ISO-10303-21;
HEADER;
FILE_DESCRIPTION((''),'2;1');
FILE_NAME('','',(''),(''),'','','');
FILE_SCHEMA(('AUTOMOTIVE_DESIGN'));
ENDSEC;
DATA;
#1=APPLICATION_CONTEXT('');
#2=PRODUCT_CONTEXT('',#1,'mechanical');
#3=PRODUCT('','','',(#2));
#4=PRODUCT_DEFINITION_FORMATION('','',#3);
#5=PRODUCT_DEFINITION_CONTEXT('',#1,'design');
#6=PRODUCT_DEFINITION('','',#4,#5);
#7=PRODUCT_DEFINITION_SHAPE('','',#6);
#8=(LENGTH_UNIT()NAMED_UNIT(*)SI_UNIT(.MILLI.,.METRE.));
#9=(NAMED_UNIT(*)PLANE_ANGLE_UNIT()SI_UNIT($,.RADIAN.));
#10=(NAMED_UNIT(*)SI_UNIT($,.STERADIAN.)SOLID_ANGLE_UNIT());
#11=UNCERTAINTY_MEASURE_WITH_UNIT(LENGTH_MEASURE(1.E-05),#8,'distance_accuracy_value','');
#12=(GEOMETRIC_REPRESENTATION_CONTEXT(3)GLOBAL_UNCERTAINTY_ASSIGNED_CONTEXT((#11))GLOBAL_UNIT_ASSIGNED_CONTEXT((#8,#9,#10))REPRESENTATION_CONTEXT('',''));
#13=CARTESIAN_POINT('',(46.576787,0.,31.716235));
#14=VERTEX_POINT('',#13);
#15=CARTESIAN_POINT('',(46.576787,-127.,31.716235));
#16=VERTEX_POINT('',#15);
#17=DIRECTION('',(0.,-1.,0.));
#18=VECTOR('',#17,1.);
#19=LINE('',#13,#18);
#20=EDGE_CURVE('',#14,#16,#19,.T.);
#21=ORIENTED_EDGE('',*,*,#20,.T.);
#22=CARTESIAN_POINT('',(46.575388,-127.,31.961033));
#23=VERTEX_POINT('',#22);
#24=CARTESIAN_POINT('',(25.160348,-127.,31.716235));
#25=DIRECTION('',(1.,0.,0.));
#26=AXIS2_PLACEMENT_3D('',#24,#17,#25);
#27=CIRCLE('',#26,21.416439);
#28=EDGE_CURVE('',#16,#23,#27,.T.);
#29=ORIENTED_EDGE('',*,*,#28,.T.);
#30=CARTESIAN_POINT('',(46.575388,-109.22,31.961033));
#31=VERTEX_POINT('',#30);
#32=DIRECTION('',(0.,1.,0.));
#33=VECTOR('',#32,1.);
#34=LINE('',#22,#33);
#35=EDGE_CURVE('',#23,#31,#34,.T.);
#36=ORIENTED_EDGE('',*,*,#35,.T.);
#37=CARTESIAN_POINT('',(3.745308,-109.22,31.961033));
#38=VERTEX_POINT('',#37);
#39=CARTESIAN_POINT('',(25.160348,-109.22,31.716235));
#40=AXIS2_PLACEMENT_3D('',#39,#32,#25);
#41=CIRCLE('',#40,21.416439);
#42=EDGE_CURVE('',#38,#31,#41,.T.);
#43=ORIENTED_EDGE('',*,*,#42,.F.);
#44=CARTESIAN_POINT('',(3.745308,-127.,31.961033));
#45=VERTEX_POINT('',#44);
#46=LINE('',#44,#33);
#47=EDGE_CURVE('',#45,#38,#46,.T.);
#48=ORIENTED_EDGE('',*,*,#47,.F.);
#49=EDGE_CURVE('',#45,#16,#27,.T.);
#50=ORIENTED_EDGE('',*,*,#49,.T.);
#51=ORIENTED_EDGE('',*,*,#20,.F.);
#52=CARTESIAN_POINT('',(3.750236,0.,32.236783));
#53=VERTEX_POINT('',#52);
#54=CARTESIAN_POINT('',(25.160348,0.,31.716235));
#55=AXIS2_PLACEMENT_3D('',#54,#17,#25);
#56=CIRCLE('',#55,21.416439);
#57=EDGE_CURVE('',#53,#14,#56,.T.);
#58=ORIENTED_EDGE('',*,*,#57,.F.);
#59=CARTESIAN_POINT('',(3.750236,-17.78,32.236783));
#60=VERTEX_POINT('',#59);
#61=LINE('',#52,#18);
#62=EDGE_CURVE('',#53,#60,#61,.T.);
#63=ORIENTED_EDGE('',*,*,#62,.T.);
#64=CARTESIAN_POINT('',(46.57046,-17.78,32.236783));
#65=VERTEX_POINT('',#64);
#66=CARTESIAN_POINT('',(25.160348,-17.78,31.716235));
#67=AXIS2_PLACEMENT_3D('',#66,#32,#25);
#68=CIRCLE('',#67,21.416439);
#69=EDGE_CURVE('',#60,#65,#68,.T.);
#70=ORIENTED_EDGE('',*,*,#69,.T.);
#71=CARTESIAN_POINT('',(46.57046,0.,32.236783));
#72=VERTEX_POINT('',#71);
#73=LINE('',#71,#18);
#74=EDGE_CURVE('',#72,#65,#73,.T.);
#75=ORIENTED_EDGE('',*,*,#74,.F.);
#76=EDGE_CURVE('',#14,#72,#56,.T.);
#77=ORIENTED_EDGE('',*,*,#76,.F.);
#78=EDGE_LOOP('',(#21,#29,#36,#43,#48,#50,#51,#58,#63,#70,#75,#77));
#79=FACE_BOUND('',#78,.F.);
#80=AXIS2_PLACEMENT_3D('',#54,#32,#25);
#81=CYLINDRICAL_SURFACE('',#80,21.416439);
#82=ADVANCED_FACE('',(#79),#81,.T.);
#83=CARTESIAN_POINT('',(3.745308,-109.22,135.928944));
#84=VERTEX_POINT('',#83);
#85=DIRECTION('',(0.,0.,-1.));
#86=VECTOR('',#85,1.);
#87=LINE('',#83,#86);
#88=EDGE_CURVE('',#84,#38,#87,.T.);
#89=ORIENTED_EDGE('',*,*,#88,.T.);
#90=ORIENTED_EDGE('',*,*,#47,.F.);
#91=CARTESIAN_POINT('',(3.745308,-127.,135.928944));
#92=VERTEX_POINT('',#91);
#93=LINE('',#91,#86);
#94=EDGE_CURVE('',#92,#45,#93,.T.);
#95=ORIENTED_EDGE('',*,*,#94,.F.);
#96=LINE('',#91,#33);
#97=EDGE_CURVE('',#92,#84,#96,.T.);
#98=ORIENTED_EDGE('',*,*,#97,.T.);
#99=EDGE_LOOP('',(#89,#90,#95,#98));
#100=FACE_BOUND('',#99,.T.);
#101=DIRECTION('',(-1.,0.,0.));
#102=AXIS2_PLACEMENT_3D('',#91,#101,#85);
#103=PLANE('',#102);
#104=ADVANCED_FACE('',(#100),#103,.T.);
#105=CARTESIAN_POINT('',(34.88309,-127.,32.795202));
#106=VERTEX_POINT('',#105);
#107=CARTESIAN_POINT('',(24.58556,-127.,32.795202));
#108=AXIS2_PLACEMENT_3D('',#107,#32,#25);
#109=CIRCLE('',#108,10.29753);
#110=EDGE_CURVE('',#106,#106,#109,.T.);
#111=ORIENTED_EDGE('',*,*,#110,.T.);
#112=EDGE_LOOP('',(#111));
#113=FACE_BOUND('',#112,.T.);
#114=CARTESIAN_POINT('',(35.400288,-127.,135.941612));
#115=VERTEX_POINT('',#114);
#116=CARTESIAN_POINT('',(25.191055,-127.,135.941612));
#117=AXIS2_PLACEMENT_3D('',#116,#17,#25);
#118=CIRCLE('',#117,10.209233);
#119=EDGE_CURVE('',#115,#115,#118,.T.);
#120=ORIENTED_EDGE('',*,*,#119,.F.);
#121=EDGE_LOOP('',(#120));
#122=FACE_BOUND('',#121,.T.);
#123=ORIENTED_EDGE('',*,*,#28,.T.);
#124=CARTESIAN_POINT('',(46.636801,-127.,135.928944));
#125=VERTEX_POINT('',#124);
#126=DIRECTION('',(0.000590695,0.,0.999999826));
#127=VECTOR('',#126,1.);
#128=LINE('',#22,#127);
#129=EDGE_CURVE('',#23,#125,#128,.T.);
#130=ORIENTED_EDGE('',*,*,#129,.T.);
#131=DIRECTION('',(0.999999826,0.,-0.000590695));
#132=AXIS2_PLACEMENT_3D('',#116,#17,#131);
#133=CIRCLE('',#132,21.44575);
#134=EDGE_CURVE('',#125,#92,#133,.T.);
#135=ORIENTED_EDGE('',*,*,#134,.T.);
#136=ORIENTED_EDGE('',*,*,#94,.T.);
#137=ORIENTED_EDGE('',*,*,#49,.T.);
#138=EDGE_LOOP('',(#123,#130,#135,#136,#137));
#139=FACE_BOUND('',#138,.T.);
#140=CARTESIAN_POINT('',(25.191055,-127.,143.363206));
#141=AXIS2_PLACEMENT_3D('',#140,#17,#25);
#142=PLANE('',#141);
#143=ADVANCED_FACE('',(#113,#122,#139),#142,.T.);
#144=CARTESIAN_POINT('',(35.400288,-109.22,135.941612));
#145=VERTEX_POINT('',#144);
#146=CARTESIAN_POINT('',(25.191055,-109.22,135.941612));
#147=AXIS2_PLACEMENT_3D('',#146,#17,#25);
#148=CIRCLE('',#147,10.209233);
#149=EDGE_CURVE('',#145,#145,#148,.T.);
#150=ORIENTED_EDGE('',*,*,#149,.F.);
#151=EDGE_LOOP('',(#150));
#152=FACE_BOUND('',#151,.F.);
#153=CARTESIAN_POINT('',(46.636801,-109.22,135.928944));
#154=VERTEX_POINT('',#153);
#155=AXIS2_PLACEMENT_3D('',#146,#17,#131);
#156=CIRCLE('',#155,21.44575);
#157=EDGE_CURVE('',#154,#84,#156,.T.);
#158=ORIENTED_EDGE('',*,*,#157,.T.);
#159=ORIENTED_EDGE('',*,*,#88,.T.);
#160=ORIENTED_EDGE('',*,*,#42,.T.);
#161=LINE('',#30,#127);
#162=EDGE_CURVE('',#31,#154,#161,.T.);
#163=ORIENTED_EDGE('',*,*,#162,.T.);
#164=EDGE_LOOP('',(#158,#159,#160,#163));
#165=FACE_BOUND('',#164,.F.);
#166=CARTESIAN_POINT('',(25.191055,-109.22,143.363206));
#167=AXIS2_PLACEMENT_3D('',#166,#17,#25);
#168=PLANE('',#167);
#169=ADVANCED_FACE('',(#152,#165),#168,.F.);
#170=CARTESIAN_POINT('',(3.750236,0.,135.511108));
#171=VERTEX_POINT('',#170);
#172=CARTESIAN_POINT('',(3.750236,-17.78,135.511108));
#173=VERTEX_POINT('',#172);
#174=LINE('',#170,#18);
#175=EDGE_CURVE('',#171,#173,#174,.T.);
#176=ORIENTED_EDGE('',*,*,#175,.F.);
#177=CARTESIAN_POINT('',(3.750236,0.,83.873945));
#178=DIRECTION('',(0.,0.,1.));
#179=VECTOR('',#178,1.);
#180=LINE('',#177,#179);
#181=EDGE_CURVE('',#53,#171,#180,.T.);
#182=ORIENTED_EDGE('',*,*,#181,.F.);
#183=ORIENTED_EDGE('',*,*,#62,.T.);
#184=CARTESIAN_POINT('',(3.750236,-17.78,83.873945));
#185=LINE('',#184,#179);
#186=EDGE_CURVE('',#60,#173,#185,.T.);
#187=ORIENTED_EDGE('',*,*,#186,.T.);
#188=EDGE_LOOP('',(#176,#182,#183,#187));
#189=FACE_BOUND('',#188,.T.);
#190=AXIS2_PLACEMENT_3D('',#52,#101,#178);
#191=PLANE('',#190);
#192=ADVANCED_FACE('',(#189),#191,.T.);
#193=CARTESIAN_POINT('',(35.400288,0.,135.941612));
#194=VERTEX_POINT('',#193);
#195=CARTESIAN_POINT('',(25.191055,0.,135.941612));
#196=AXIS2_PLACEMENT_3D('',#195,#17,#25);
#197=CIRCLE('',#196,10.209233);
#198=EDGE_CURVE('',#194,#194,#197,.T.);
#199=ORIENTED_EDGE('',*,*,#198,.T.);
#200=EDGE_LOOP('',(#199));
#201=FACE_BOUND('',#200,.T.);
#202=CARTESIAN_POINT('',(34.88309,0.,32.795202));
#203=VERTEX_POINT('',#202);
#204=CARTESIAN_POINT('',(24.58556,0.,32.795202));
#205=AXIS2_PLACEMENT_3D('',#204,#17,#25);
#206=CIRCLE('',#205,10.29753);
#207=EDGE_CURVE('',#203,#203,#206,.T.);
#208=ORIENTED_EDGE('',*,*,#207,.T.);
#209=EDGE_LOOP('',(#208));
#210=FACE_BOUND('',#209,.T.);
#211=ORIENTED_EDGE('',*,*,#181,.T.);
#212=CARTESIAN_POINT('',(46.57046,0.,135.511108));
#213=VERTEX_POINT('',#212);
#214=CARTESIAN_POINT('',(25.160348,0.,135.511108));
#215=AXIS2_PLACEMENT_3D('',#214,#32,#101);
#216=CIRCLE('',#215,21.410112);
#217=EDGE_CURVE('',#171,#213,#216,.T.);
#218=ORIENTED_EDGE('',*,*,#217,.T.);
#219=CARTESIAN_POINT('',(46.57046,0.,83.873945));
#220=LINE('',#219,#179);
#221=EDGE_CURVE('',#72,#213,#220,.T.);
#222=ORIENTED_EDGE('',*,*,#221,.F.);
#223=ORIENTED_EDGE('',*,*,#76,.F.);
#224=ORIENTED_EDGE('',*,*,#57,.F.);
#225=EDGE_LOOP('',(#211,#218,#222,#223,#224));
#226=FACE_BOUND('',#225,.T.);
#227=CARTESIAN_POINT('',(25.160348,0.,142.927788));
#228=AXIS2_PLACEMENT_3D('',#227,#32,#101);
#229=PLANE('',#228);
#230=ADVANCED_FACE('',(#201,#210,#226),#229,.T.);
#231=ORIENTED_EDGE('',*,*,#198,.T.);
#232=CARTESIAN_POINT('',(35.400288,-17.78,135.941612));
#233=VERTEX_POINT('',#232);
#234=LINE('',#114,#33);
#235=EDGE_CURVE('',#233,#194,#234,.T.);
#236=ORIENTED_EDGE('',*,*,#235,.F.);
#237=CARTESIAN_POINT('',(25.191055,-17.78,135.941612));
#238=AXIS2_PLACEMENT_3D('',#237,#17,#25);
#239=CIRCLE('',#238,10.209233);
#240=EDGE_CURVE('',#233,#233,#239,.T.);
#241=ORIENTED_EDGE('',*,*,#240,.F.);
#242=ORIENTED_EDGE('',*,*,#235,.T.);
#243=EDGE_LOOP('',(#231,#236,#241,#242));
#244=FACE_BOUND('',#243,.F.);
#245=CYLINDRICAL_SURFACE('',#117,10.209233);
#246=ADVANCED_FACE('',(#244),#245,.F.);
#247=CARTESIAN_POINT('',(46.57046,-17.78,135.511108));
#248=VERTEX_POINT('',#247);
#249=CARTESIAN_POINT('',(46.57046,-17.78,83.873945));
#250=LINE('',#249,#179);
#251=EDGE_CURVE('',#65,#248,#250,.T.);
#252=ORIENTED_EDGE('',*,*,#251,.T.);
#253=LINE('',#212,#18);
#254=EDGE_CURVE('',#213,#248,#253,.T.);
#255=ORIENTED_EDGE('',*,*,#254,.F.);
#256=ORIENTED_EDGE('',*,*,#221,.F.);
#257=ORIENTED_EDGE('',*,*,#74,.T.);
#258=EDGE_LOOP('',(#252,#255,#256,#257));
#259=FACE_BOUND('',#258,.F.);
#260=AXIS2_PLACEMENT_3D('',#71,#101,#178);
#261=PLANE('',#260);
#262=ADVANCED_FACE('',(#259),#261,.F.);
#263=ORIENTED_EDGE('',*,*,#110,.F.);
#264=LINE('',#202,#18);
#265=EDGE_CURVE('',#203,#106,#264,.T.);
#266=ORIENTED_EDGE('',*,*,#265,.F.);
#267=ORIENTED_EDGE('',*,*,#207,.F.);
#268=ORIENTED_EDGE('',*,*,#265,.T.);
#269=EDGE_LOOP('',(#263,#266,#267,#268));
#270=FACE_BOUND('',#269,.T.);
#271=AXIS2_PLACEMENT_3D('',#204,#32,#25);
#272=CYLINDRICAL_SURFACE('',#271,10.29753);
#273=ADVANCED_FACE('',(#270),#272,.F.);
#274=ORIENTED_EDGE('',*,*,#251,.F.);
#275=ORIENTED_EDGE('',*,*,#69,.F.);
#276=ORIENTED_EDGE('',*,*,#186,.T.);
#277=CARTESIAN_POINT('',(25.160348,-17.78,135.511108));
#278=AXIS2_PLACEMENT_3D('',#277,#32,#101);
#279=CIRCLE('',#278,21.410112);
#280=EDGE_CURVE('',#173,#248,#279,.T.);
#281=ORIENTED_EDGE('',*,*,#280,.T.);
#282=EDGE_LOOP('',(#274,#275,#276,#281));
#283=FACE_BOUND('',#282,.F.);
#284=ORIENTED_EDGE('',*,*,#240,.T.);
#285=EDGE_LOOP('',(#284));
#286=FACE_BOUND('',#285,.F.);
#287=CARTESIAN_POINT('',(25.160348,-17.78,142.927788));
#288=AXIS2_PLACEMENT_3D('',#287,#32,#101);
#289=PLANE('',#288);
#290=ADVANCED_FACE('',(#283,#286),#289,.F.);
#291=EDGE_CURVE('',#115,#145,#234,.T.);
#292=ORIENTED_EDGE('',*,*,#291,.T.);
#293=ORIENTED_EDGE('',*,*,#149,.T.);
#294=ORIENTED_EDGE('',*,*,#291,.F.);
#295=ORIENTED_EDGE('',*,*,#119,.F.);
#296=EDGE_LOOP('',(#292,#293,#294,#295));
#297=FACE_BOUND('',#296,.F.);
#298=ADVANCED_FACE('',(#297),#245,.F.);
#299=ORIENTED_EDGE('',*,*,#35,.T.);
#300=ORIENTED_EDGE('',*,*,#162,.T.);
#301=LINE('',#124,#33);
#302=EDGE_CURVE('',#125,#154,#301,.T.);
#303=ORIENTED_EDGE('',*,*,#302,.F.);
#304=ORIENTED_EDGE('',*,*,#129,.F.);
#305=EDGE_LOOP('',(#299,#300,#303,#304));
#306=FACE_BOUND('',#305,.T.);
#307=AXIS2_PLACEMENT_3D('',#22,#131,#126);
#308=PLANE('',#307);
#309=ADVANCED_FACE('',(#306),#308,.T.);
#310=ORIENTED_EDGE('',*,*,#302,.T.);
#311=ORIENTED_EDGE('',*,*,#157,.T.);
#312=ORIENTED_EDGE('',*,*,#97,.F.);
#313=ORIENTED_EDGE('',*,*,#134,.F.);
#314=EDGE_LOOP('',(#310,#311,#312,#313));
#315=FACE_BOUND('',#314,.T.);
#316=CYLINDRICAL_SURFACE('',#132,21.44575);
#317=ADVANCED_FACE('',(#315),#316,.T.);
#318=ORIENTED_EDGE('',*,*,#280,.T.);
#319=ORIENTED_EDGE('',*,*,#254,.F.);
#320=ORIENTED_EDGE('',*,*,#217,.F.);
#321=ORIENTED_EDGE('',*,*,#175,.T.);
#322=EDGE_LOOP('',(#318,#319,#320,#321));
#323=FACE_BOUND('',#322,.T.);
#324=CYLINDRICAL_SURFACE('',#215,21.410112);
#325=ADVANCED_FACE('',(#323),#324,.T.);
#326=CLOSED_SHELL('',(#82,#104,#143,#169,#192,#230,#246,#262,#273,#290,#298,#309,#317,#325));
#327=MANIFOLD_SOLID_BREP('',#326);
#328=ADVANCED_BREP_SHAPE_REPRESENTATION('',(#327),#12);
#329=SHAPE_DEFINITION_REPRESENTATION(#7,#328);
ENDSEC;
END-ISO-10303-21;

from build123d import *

# Parameters (mm, degrees)
F0_R      = 21.4164389033
F1_DEPTH  = 127
F2_W      = 42.8202235004
F2_H      = 103.2743248374
F3_DEPTH  = 17.78
F5_DEPTH  = 17.78
F6_R      = 7.3683109371
F7_DEPTH  = 273
F8_R      = 10.2975296605
F9_DEPTH  = 127.001
F11_DEPTH = 17.78
F13_DEPTH = 17.78
F14_R     = 10.2092328794
F15_DEPTH = 127.001


# Not quite as in the source:
# - an extrude ends at something that could not be found from the text; its depth is read off the source's solid


with BuildPart() as f1:
    # F0 (on Front) → F1 (new body)
    with BuildSketch(Plane.XZ):
        with Locations((25.1603480428, 31.716234982)):
            Circle(F0_R)
    extrude(amount=F1_DEPTH)

    # F2 (on face) → F3 (join)
    with BuildSketch(Plane(origin=(0, 0, 0), x_dir=(-1, 0, 0), z_dir=(0, 1, 0))):
        with Locations((-25.1603480428, 83.8739453241)):
            Rectangle(F2_W, F2_H)
    extrude(amount=-F3_DEPTH)

    # F4 (on face) → F5 (join)
    with BuildSketch(Plane.XZ.offset(127)):
        Polygon((3.7453082572, 31.961033423), (46.5753878285, 31.961033423), (46.636801213, 135.9289437532), (3.7453082572, 135.9289437532), align=None)
    extrude(amount=-F5_DEPTH)

    # F6 (on Front) → F7 (cut, through all)
    with BuildSketch(Plane.XZ):
        with Locations((25.2368301153, 31.4926542342)):
            Circle(F6_R)
    extrude(amount=-F7_DEPTH, mode=Mode.SUBTRACT)

    # F8 (on Front) → F9 (cut, through all)
    with BuildSketch(Plane.XZ):
        with Locations((24.5855599642, 32.795201987)):
            Circle(F8_R)
    extrude(amount=F9_DEPTH, mode=Mode.SUBTRACT)

    # F10 (on face) → F11 (join)
    with BuildSketch(Plane.XZ.offset(127)):
        with BuildLine():
            Line((3.7453082572, 135.9289437532), (46.636801213, 135.9289437532))
            ThreePointArc((46.636801213, 135.9289437532), (25.1910547351, 157.3873618801), (3.7453082572, 135.9289437532))
        make_face()
    extrude(amount=-F11_DEPTH)

    # F12 (on face) → F13 (join)
    with BuildSketch(Plane(origin=(0, 0, 0), x_dir=(-1, 0, 0), z_dir=(0, 1, 0))):
        with BuildLine():
            Line((-46.5704597931, 135.5111077428), (-3.7502362926, 135.5111077428))
            ThreePointArc((-3.7502362926, 135.5111077428), (-25.1603480428, 156.921219493), (-46.5704597931, 135.5111077428))
        make_face()
    extrude(amount=-F13_DEPTH)

    # F14 (on face) → F15 (cut, through all)
    with BuildSketch(Plane.XZ.offset(127)):
        with Locations((25.1910547351, 135.9416116608)):
            Circle(F14_R)
    extrude(amount=-F15_DEPTH, mode=Mode.SUBTRACT)


solid = f1.part
